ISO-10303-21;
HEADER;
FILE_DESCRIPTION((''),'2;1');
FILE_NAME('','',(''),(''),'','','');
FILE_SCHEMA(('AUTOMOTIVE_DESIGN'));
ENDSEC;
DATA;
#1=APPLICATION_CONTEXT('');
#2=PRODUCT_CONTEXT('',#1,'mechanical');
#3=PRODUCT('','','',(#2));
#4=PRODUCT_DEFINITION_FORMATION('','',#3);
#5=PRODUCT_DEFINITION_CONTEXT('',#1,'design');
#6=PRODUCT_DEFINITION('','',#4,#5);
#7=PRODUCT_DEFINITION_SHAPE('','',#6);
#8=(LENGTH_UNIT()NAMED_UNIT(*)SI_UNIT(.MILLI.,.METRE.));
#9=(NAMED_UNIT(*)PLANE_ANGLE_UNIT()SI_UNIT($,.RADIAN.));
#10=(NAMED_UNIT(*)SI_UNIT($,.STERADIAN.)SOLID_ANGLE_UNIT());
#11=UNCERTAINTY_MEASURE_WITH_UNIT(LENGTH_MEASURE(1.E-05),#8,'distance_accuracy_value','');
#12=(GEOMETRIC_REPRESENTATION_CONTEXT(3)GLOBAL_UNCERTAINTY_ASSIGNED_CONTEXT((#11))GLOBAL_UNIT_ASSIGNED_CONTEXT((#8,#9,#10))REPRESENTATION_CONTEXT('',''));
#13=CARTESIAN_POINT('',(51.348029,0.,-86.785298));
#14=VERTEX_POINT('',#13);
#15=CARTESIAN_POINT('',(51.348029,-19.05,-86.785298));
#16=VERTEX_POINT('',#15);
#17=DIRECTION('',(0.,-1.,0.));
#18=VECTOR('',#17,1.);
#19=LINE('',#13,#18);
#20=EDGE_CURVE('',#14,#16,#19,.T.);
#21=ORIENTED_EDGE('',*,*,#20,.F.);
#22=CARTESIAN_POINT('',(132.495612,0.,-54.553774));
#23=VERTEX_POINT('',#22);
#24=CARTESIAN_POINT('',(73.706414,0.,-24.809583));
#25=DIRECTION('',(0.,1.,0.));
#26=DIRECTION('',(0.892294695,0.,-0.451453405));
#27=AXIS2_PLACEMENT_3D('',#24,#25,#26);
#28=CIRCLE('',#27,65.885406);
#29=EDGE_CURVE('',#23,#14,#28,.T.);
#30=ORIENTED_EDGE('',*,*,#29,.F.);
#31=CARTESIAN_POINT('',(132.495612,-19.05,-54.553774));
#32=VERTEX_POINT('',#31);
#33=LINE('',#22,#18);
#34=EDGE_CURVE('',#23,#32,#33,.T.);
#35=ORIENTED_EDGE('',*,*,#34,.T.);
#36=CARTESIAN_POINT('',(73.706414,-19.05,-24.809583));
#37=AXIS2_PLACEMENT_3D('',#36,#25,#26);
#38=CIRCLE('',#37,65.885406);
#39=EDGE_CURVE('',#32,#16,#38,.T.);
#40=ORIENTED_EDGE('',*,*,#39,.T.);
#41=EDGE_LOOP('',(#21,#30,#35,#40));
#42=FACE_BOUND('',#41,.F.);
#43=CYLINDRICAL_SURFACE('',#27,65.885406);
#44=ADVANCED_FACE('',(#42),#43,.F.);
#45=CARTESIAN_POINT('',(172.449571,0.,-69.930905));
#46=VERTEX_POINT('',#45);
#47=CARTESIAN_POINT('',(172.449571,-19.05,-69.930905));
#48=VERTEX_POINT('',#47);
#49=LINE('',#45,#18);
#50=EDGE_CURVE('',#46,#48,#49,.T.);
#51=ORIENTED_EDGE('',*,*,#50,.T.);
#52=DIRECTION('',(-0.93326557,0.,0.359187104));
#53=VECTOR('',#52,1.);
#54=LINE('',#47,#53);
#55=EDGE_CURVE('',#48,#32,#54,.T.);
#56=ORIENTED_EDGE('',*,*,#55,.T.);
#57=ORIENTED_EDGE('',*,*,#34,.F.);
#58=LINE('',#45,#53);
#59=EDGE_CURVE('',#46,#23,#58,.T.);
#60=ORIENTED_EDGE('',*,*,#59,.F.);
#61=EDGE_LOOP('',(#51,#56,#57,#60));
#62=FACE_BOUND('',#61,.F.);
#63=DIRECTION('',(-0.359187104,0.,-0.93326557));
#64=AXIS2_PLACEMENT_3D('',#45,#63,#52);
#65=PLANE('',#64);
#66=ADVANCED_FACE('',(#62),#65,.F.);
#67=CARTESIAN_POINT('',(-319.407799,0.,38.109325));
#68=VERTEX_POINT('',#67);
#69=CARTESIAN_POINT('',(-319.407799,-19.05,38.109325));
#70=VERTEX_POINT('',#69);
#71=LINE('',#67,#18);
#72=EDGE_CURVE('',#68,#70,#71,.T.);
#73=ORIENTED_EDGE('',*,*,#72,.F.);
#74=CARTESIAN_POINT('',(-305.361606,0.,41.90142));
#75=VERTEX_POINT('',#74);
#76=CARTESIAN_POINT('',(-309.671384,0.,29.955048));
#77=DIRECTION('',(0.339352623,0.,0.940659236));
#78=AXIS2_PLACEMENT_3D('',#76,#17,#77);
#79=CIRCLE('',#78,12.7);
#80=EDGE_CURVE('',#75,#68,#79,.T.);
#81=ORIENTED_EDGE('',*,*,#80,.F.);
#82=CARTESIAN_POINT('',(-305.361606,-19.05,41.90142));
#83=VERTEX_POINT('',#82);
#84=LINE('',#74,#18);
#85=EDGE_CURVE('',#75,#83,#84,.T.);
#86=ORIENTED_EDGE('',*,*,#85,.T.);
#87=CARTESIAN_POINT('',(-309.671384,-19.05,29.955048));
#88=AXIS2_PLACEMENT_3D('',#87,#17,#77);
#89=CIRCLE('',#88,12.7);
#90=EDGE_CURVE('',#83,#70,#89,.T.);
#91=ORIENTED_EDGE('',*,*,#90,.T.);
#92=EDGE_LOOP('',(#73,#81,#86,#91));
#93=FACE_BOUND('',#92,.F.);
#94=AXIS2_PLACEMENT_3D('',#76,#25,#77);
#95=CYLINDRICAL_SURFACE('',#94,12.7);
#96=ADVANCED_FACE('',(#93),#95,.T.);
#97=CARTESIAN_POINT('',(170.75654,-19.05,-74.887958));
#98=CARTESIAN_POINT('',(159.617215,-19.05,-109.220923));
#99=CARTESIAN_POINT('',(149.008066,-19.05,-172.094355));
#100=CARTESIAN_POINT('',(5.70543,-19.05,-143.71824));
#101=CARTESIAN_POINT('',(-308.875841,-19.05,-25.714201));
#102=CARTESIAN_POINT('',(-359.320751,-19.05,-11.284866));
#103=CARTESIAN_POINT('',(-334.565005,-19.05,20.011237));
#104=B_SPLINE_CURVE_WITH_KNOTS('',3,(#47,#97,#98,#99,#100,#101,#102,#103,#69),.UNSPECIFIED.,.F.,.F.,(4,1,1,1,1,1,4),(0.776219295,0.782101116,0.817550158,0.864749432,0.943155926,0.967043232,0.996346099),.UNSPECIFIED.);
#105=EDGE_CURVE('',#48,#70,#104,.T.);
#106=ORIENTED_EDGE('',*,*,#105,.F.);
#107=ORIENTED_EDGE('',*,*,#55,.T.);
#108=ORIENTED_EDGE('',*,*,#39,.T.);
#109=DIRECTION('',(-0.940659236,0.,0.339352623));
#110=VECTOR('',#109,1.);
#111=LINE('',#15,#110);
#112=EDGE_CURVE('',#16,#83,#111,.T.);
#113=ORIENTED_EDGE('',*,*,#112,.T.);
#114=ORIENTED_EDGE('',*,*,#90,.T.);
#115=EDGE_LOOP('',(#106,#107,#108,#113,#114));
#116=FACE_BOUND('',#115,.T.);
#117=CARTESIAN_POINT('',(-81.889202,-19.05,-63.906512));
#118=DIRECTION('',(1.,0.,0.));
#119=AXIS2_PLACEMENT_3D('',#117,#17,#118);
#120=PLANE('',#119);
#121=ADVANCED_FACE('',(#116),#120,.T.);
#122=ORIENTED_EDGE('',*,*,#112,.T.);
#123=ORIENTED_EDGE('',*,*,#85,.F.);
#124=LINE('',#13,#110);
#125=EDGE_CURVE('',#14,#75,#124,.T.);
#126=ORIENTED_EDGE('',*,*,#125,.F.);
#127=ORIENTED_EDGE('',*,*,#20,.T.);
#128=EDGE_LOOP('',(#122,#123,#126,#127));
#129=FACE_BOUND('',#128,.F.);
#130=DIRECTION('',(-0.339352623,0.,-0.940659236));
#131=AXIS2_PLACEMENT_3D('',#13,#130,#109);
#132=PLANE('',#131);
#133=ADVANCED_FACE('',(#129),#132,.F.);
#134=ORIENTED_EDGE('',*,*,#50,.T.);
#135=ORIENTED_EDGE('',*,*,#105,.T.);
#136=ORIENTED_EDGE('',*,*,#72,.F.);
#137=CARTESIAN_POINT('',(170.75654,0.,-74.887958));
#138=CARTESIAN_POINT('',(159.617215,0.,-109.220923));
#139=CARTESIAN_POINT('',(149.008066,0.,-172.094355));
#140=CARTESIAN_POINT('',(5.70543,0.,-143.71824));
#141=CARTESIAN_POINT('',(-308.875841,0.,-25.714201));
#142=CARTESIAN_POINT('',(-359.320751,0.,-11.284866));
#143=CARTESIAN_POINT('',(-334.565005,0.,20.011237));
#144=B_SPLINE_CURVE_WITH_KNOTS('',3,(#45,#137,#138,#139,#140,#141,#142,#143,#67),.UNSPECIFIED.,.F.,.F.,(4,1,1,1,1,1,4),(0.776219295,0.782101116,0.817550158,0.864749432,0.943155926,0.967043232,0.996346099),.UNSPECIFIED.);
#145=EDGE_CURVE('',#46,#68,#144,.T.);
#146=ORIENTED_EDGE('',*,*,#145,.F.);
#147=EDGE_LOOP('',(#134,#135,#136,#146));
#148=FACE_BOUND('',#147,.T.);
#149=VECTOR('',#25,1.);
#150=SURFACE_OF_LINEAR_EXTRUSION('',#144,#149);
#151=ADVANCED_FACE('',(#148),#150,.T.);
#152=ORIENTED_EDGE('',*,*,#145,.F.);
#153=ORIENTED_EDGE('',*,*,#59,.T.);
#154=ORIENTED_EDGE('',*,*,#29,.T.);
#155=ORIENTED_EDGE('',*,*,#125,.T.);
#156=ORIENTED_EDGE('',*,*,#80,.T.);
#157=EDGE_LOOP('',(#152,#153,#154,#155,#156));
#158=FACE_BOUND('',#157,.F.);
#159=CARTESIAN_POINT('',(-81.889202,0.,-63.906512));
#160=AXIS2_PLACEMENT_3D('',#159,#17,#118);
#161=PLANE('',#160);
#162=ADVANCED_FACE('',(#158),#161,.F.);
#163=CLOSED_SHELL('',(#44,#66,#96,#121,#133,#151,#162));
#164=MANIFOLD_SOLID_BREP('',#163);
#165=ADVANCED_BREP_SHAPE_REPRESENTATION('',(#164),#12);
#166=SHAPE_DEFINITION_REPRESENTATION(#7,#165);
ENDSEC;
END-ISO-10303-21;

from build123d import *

# Parameters (mm, degrees)
F1_DEPTH = 19.05


with BuildPart() as f1:
    # F0 (on Front) → F1 (new body)
    with BuildSketch(Plane.XZ):
        with BuildLine():
            Line((51.3480285322, -86.7852984616), (-305.3616061666, 41.9014199259))
            ThreePointArc((-305.3616061666, 41.9014199259), (-312.981533952, 42.2160798285), (-319.4077985163, 38.1093251416))
            add(Edge.make_bspline(
                [(172.4495707126, -69.9309047478), (170.7565397374, -74.8879578834), (159.6172151028, -109.2209226086), (149.008066375, -172.0943551046), (5.705430346, -143.7182399989), (-308.8758408469, -25.714201087), (-359.3207511694, -11.2848664797), (-334.5650047362, 20.0112367074), (-319.4077985163, 38.1093251416)],
                knots=[0.7762192949, 0.7762192949, 0.7762192949, 0.7762192949, 0.7821011157, 0.8175501575, 0.8647494322, 0.9431559258, 0.9670432321, 0.9963460987, 0.9963460987, 0.9963460987, 0.9963460987], degree=3))
            Line((172.4495707126, -69.9309047478), (132.4956117337, -54.5537738749))
            ThreePointArc((132.4956117337, -54.5537738749), (98.0275737575, -86.0416650579), (51.3480285322, -86.7852984616))
        make_face()
    extrude(amount=F1_DEPTH)


solid = f1.part
